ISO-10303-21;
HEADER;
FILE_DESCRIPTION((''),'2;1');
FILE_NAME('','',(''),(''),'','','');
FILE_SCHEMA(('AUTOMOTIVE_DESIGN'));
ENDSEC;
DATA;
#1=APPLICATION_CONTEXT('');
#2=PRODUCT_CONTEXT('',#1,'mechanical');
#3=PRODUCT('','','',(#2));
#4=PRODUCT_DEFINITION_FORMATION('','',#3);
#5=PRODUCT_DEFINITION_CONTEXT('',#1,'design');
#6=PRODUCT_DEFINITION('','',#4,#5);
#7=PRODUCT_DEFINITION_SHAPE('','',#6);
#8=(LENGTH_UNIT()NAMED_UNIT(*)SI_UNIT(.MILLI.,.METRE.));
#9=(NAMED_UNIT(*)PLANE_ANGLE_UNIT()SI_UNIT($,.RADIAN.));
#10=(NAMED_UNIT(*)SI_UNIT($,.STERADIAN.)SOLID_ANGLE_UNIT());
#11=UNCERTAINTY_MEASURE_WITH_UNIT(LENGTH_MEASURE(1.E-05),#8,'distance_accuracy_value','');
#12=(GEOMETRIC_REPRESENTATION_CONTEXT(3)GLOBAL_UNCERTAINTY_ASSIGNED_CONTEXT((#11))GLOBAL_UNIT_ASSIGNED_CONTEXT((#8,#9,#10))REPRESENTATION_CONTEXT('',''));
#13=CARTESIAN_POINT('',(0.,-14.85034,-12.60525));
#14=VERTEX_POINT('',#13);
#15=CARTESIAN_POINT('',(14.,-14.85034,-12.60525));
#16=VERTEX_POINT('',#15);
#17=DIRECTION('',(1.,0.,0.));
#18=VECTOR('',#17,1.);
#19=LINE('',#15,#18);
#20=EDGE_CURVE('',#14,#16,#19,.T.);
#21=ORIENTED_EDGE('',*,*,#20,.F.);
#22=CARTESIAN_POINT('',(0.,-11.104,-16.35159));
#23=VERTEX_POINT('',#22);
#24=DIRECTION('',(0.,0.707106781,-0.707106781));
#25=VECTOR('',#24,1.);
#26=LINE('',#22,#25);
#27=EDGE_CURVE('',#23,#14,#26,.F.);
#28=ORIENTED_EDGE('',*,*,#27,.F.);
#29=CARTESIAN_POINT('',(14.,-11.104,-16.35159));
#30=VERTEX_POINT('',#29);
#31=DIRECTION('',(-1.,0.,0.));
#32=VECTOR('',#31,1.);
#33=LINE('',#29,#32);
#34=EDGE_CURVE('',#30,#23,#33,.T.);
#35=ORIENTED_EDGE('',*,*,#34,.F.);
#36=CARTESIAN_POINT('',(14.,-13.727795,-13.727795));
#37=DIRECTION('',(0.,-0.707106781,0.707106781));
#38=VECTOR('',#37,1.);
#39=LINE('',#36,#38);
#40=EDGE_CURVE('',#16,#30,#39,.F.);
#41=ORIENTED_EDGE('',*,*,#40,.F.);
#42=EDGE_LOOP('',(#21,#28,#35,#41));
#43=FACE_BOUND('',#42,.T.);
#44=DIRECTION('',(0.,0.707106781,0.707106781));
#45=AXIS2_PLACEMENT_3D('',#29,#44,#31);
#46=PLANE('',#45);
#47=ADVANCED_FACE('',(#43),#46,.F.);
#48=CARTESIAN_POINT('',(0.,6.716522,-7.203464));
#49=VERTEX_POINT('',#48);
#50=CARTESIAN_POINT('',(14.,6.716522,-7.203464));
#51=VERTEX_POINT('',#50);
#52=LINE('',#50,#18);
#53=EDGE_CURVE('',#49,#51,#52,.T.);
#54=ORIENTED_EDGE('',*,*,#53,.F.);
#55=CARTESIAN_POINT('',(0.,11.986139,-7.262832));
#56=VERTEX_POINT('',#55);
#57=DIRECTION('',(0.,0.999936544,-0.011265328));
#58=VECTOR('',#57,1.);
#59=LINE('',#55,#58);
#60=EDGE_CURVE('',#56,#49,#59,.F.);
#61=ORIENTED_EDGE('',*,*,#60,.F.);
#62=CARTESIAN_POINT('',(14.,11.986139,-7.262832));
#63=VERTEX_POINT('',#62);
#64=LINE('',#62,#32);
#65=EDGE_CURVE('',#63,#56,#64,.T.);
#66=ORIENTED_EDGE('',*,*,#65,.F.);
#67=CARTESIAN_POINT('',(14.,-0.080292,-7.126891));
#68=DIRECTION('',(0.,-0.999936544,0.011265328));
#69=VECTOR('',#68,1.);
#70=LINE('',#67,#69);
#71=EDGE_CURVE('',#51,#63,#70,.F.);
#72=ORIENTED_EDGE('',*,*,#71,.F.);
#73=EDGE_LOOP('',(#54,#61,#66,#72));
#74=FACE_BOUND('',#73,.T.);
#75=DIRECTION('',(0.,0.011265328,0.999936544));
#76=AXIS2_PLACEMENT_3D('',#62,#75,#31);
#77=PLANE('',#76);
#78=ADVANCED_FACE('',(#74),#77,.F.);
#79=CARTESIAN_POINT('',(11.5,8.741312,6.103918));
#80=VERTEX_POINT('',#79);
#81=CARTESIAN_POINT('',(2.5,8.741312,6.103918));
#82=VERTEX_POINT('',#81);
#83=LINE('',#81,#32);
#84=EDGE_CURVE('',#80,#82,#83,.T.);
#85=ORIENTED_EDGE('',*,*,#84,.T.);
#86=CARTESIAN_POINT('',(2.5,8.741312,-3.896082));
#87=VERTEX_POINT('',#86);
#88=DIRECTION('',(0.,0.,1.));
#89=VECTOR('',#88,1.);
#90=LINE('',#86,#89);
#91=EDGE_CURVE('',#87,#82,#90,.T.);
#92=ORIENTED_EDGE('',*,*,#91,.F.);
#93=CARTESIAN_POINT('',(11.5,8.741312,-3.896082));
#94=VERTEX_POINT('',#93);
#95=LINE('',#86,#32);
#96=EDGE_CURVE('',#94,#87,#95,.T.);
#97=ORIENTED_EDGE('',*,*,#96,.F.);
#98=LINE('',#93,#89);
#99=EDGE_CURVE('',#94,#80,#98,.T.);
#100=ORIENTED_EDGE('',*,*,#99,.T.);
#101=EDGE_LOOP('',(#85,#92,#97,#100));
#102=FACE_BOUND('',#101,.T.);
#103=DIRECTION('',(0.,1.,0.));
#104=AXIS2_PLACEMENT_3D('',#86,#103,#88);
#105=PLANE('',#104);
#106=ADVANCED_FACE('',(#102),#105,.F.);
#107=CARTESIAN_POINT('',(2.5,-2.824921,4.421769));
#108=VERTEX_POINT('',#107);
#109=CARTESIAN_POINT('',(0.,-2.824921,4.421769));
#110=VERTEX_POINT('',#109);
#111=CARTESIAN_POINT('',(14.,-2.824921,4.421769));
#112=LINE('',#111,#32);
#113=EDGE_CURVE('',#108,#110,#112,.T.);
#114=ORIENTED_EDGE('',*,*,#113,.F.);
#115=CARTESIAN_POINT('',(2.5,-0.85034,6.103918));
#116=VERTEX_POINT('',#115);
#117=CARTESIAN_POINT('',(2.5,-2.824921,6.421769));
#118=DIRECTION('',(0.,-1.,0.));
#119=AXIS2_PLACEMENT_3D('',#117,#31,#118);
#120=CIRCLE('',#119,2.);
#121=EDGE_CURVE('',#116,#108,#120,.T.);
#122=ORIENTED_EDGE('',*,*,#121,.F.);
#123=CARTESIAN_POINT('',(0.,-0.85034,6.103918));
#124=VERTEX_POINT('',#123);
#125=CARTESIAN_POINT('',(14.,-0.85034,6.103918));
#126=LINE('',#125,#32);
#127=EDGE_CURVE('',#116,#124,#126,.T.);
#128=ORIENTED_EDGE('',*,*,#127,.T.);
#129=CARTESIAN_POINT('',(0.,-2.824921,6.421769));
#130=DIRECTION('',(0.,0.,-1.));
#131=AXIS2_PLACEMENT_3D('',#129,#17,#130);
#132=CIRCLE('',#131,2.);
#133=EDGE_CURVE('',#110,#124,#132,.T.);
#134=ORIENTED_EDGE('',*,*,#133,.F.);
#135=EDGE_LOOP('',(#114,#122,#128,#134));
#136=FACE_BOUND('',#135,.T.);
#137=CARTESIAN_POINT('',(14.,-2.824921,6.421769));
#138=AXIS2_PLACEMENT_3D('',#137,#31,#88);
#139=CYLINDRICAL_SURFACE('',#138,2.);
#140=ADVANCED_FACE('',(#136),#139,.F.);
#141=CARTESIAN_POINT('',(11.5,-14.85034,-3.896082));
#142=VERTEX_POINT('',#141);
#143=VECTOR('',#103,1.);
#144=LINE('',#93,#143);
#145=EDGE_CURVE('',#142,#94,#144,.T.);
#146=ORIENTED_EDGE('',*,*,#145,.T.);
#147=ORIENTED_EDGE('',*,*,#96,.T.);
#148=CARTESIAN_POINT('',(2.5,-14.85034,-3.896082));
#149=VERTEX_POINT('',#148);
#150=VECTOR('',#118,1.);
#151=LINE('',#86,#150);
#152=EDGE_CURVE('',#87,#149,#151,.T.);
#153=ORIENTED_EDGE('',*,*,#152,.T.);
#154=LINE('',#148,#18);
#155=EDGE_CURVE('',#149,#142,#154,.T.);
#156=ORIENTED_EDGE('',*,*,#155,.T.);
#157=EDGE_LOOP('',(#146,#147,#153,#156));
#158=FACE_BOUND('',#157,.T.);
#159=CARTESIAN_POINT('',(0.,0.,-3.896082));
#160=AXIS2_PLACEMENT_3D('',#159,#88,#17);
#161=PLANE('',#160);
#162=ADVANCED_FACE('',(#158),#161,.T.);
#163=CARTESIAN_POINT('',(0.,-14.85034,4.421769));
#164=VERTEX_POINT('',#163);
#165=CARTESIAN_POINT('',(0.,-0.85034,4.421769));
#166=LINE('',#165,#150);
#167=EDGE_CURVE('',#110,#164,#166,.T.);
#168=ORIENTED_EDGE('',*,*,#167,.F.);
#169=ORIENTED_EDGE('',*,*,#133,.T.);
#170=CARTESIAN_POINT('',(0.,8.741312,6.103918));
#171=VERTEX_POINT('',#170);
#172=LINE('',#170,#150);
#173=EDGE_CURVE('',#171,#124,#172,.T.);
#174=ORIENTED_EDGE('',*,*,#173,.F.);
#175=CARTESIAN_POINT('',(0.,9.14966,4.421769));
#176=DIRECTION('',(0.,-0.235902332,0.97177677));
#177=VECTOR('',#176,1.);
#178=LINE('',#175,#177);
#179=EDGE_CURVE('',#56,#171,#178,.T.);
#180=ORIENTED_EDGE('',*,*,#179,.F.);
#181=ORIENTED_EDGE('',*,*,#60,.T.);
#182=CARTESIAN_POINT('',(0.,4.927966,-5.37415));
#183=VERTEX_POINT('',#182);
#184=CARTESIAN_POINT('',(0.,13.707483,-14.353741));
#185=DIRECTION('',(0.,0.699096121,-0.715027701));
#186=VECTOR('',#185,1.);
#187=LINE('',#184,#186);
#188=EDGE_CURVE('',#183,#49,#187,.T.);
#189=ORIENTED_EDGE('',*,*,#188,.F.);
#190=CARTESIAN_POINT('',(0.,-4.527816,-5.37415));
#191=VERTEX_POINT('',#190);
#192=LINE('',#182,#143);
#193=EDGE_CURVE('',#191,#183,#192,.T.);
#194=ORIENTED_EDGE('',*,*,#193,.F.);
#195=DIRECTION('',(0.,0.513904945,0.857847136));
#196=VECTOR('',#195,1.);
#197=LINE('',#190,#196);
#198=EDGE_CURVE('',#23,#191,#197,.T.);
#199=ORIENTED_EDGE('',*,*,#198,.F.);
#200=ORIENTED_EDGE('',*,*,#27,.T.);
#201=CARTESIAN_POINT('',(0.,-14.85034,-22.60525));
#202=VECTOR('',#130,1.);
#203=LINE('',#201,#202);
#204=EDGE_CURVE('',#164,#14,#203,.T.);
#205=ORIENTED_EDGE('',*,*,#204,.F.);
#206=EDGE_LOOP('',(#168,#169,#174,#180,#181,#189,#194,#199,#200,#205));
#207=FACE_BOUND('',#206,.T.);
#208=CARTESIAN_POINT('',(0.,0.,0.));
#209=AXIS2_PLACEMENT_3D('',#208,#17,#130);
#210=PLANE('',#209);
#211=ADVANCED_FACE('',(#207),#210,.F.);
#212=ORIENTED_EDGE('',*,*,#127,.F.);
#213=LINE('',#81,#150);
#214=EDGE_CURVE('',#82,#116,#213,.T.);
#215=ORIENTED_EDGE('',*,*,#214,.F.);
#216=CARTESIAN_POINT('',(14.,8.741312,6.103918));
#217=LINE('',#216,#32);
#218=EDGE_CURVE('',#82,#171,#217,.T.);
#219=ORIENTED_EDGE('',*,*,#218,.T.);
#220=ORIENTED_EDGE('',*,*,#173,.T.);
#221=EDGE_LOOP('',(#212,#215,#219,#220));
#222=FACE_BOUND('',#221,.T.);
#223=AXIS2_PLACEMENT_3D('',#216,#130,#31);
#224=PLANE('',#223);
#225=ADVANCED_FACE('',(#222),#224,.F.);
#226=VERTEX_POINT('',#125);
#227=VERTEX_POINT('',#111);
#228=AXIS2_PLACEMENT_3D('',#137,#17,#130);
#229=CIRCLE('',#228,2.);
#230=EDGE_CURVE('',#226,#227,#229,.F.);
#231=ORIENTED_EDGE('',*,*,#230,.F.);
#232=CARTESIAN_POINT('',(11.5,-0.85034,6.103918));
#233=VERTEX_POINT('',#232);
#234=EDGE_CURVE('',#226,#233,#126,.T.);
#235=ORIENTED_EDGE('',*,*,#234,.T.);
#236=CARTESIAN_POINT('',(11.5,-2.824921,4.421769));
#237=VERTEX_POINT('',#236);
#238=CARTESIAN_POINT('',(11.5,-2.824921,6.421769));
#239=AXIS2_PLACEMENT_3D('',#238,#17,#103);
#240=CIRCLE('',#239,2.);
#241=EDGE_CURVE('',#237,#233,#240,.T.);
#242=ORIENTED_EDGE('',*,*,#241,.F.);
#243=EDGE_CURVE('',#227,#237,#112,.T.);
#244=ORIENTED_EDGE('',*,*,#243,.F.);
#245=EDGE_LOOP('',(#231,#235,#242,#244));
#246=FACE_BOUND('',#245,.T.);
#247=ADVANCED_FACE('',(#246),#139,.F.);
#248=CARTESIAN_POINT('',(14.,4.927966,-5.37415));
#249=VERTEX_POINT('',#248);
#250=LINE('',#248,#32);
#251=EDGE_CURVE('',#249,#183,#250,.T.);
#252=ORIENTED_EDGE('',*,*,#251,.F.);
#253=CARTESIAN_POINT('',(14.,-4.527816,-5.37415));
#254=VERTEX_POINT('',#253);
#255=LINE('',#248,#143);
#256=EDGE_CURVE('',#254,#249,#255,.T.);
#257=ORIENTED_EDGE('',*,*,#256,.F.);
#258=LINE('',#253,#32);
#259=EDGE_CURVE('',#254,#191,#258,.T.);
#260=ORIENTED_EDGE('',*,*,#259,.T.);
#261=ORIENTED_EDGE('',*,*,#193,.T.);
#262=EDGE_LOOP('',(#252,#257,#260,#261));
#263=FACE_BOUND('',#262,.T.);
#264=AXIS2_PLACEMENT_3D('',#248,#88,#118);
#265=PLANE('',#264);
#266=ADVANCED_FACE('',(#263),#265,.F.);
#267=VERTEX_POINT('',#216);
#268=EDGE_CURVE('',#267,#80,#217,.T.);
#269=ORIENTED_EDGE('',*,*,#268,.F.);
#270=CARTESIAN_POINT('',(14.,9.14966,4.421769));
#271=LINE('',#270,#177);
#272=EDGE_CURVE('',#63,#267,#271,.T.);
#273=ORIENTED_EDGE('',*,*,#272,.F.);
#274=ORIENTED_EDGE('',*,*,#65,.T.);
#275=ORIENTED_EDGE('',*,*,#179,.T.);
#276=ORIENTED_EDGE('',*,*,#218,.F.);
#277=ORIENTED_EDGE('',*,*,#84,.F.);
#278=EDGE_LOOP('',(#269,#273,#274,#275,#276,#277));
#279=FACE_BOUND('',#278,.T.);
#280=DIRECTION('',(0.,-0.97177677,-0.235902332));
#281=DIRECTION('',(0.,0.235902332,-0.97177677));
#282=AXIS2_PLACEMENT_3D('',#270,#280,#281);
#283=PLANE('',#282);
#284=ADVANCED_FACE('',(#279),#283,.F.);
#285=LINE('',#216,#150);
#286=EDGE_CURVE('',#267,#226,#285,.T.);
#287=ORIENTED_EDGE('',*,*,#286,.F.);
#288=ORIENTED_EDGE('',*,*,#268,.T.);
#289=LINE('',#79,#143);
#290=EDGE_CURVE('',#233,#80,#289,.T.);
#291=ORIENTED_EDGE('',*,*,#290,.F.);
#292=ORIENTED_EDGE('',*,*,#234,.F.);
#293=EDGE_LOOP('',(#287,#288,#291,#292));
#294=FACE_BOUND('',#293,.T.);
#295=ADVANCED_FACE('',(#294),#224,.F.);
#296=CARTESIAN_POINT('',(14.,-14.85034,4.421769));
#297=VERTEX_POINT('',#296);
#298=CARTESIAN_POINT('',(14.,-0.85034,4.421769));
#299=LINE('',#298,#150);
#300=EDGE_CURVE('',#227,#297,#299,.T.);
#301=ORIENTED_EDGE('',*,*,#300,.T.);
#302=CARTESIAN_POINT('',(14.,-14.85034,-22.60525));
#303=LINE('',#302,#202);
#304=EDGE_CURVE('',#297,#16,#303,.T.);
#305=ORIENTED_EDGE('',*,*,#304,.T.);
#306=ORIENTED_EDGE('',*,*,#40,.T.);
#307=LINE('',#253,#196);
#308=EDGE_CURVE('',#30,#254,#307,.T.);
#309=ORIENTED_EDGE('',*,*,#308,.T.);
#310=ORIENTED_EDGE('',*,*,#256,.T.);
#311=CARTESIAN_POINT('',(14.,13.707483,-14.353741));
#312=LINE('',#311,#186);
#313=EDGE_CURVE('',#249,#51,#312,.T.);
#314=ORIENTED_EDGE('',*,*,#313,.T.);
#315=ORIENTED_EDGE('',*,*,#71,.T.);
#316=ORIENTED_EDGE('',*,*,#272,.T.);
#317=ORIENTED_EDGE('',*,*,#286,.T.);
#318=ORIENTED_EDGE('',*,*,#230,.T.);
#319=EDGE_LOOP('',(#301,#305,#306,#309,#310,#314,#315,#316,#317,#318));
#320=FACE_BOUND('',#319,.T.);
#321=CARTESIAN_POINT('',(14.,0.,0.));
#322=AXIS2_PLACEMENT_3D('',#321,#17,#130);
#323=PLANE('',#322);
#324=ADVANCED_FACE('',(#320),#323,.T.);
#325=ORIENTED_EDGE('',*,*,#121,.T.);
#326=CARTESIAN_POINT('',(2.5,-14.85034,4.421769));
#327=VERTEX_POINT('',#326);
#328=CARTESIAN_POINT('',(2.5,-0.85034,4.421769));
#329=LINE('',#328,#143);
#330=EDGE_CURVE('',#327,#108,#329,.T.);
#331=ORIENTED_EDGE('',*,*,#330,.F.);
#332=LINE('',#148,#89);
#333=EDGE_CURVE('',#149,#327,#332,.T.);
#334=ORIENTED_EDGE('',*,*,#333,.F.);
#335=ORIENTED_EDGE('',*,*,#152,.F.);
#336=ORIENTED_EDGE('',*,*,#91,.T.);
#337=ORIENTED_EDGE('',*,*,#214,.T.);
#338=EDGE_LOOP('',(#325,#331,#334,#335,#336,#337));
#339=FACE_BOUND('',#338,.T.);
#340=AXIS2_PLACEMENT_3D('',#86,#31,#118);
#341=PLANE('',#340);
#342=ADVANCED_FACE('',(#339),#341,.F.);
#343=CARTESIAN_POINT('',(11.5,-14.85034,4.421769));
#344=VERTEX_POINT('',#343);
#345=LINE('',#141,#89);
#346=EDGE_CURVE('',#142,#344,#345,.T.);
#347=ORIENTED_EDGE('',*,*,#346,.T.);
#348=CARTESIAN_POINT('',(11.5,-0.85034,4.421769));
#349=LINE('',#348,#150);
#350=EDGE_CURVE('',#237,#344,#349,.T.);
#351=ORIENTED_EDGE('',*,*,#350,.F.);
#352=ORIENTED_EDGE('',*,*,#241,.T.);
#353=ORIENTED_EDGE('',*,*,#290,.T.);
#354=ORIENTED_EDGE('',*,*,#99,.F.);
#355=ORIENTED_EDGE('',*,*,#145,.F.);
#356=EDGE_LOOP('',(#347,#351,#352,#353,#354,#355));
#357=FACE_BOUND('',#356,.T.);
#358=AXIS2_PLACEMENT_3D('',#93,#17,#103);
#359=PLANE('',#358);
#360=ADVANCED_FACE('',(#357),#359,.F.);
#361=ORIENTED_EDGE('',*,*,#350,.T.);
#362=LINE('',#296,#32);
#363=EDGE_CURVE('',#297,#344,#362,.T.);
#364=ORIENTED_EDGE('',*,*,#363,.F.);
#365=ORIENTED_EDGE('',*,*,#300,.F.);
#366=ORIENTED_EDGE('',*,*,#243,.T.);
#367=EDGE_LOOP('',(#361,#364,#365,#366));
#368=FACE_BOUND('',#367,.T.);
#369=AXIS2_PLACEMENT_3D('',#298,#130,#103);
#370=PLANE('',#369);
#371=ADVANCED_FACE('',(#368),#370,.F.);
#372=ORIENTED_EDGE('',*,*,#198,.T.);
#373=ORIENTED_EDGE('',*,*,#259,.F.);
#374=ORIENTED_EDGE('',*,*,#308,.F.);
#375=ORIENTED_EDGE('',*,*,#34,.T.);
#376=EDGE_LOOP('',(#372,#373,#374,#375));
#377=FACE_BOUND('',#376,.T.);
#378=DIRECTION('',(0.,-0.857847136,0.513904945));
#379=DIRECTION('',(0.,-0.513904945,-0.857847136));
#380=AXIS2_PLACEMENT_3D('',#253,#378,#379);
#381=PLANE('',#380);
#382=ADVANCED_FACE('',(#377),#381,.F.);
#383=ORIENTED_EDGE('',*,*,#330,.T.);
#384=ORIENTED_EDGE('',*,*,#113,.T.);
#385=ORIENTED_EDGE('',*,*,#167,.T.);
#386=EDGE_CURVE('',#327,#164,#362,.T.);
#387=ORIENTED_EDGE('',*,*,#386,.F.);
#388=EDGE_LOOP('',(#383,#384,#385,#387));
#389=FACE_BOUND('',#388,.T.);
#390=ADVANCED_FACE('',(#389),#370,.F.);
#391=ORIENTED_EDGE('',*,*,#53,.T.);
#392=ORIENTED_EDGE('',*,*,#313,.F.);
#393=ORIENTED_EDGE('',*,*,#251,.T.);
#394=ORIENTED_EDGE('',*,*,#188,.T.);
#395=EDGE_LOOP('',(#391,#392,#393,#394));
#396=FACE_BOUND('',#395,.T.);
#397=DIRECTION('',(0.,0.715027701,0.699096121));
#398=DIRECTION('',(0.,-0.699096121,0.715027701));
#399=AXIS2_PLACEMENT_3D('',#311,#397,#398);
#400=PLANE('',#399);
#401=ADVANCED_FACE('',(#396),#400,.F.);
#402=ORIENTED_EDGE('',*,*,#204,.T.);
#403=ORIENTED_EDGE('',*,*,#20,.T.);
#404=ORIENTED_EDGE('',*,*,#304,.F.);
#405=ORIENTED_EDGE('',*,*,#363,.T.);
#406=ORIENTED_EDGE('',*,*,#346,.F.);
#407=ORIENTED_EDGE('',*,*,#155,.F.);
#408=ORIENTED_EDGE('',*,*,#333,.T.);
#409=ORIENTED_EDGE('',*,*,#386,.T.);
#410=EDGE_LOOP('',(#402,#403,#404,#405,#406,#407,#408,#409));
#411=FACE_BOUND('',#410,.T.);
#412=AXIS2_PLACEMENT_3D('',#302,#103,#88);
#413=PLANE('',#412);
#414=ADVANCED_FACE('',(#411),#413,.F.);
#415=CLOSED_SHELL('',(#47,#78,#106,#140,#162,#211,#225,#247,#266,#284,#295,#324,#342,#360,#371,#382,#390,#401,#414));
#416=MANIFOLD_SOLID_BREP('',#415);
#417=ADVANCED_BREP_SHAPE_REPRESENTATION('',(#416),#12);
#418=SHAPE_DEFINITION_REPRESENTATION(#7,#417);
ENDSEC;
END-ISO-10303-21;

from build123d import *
from OCP.BRepFilletAPI import BRepFilletAPI_MakeChamfer

# Parameters (mm, degrees)
BOSS_EXTRUDE5_DEPTH = 14
SKETCH6_W           = 9
SKETCH6_H           = 23.591652045
CUT_EXTRUDE1_DEPTH  = 10
FILLET1_R           = 2
CHAMFER1_SIZE       = 10
CHAMFER1_SIZE2      = 7.296849953
CHAMFER1_SIZE2_2    = 7.289947028


with BuildPart() as part:
    # Sketch4 → Boss-Extrude5 (new body)
    with BuildSketch(Plane(origin=(0, 0, 0), x_dir=(0, 0, -1), z_dir=(1, 0, 0))):
        Polygon((-4.421768707, 9.149659864), (14.353741497, 13.707482993), (5.37414966, 4.927966044), (5.37414966, -4.527816269), (22.605249741, -14.850340136), (-4.421768707, -14.850340136), (-4.421768707, -0.850340136), (-6.10391849, -0.850340136), (-6.10391849, 8.741311909), align=None)
    extrude(amount=BOSS_EXTRUDE5_DEPTH)

    # Sketch6 → Cut-Extrude1 (cut)
    with BuildSketch(Plane.XY.offset(6.10391849)):
        with Locations((7, -3.054514114)):
            Rectangle(SKETCH6_W, SKETCH6_H)
    extrude(amount=-CUT_EXTRUDE1_DEPTH, mode=Mode.SUBTRACT)

    # Fillet1
    # the kernel refuses this fillet: 2 mm, written as the material it adds along each edge
    with BuildSketch(Plane(origin=(0, -0.850340136, 4.421768707), x_dir=(0, -1, 0), z_dir=(1, 0, 0))) as fillet1_piece_1:
        with BuildLine():
            CenterArc((1.974581282, -2), FILLET1_R, 90, 80.855488808)
            Line((0, -1.682149783), (-0.039491626, -1.675792779))
            ThreePointArc((-0.039491626, -1.675792779), (-0.04, -0.841074891), (-0.04, 0))
            Line((-0.04, 0), (0, 0.04))
            Line((0, 0.04), (1.974581282, 0.04))
            Line((1.974581282, 0.04), (1.974581282, 0))
        make_face()
    extrude(amount=2.5)
    with BuildSketch(Plane(origin=(11.5, -0.850340136, 4.421768707), x_dir=(0, 0, 1), z_dir=(1, 0, 0))) as fillet1_piece_2:
        with BuildLine():
            CenterArc((2, 1.974581282), FILLET1_R, 180, 80.855488808)
            Line((0, 1.974581282), (-0.04, 1.974581282))
            Line((-0.04, 1.974581282), (-0.04, 0))
            Line((-0.04, 0), (0, -0.04))
            ThreePointArc((0, -0.04), (0.841074891, -0.04), (1.675792779, -0.039491626))
            Line((1.675792779, -0.039491626), (1.682149783, 0))
        make_face()
    extrude(amount=2.5)

    # Chamfer1: one chamfer whose edges measure the first distance from different faces: ONE call of the kernel's chamfer builder (chamfer() names one face for all edges)
    chamfer1_edges_1 = [part.edges().sort_by_distance(p)[0] for p in [
        (7, 13.707482993, -14.353741497),
    ]]
    chamfer1_side_1 = [part.faces().sort_by_distance(p)[0] for p in [
        (7, 9.317724519, -9.863945578),
    ]]
    chamfer1_edges_2 = [part.edges().sort_by_distance(p)[0] for p in [
        (7, -14.850340136, -22.605249741),
    ]]
    chamfer1_side_2 = [part.faces().sort_by_distance(p)[0] for p in [
        (7, -14.850340136, -11.398988107),
    ]]
    chamfer1 = BRepFilletAPI_MakeChamfer(part.part.solid().wrapped)
    for e in chamfer1_edges_1:
        chamfer1.Add(CHAMFER1_SIZE, CHAMFER1_SIZE2, e.wrapped, chamfer1_side_1[0].wrapped)  # the first distance lies on this face
    for e in chamfer1_edges_2:
        chamfer1.Add(CHAMFER1_SIZE, CHAMFER1_SIZE2_2, e.wrapped, chamfer1_side_2[0].wrapped)  # the first distance lies on this face
    add(Compound.cast(chamfer1.Shape()), mode=Mode.REPLACE)


solid = part.part
